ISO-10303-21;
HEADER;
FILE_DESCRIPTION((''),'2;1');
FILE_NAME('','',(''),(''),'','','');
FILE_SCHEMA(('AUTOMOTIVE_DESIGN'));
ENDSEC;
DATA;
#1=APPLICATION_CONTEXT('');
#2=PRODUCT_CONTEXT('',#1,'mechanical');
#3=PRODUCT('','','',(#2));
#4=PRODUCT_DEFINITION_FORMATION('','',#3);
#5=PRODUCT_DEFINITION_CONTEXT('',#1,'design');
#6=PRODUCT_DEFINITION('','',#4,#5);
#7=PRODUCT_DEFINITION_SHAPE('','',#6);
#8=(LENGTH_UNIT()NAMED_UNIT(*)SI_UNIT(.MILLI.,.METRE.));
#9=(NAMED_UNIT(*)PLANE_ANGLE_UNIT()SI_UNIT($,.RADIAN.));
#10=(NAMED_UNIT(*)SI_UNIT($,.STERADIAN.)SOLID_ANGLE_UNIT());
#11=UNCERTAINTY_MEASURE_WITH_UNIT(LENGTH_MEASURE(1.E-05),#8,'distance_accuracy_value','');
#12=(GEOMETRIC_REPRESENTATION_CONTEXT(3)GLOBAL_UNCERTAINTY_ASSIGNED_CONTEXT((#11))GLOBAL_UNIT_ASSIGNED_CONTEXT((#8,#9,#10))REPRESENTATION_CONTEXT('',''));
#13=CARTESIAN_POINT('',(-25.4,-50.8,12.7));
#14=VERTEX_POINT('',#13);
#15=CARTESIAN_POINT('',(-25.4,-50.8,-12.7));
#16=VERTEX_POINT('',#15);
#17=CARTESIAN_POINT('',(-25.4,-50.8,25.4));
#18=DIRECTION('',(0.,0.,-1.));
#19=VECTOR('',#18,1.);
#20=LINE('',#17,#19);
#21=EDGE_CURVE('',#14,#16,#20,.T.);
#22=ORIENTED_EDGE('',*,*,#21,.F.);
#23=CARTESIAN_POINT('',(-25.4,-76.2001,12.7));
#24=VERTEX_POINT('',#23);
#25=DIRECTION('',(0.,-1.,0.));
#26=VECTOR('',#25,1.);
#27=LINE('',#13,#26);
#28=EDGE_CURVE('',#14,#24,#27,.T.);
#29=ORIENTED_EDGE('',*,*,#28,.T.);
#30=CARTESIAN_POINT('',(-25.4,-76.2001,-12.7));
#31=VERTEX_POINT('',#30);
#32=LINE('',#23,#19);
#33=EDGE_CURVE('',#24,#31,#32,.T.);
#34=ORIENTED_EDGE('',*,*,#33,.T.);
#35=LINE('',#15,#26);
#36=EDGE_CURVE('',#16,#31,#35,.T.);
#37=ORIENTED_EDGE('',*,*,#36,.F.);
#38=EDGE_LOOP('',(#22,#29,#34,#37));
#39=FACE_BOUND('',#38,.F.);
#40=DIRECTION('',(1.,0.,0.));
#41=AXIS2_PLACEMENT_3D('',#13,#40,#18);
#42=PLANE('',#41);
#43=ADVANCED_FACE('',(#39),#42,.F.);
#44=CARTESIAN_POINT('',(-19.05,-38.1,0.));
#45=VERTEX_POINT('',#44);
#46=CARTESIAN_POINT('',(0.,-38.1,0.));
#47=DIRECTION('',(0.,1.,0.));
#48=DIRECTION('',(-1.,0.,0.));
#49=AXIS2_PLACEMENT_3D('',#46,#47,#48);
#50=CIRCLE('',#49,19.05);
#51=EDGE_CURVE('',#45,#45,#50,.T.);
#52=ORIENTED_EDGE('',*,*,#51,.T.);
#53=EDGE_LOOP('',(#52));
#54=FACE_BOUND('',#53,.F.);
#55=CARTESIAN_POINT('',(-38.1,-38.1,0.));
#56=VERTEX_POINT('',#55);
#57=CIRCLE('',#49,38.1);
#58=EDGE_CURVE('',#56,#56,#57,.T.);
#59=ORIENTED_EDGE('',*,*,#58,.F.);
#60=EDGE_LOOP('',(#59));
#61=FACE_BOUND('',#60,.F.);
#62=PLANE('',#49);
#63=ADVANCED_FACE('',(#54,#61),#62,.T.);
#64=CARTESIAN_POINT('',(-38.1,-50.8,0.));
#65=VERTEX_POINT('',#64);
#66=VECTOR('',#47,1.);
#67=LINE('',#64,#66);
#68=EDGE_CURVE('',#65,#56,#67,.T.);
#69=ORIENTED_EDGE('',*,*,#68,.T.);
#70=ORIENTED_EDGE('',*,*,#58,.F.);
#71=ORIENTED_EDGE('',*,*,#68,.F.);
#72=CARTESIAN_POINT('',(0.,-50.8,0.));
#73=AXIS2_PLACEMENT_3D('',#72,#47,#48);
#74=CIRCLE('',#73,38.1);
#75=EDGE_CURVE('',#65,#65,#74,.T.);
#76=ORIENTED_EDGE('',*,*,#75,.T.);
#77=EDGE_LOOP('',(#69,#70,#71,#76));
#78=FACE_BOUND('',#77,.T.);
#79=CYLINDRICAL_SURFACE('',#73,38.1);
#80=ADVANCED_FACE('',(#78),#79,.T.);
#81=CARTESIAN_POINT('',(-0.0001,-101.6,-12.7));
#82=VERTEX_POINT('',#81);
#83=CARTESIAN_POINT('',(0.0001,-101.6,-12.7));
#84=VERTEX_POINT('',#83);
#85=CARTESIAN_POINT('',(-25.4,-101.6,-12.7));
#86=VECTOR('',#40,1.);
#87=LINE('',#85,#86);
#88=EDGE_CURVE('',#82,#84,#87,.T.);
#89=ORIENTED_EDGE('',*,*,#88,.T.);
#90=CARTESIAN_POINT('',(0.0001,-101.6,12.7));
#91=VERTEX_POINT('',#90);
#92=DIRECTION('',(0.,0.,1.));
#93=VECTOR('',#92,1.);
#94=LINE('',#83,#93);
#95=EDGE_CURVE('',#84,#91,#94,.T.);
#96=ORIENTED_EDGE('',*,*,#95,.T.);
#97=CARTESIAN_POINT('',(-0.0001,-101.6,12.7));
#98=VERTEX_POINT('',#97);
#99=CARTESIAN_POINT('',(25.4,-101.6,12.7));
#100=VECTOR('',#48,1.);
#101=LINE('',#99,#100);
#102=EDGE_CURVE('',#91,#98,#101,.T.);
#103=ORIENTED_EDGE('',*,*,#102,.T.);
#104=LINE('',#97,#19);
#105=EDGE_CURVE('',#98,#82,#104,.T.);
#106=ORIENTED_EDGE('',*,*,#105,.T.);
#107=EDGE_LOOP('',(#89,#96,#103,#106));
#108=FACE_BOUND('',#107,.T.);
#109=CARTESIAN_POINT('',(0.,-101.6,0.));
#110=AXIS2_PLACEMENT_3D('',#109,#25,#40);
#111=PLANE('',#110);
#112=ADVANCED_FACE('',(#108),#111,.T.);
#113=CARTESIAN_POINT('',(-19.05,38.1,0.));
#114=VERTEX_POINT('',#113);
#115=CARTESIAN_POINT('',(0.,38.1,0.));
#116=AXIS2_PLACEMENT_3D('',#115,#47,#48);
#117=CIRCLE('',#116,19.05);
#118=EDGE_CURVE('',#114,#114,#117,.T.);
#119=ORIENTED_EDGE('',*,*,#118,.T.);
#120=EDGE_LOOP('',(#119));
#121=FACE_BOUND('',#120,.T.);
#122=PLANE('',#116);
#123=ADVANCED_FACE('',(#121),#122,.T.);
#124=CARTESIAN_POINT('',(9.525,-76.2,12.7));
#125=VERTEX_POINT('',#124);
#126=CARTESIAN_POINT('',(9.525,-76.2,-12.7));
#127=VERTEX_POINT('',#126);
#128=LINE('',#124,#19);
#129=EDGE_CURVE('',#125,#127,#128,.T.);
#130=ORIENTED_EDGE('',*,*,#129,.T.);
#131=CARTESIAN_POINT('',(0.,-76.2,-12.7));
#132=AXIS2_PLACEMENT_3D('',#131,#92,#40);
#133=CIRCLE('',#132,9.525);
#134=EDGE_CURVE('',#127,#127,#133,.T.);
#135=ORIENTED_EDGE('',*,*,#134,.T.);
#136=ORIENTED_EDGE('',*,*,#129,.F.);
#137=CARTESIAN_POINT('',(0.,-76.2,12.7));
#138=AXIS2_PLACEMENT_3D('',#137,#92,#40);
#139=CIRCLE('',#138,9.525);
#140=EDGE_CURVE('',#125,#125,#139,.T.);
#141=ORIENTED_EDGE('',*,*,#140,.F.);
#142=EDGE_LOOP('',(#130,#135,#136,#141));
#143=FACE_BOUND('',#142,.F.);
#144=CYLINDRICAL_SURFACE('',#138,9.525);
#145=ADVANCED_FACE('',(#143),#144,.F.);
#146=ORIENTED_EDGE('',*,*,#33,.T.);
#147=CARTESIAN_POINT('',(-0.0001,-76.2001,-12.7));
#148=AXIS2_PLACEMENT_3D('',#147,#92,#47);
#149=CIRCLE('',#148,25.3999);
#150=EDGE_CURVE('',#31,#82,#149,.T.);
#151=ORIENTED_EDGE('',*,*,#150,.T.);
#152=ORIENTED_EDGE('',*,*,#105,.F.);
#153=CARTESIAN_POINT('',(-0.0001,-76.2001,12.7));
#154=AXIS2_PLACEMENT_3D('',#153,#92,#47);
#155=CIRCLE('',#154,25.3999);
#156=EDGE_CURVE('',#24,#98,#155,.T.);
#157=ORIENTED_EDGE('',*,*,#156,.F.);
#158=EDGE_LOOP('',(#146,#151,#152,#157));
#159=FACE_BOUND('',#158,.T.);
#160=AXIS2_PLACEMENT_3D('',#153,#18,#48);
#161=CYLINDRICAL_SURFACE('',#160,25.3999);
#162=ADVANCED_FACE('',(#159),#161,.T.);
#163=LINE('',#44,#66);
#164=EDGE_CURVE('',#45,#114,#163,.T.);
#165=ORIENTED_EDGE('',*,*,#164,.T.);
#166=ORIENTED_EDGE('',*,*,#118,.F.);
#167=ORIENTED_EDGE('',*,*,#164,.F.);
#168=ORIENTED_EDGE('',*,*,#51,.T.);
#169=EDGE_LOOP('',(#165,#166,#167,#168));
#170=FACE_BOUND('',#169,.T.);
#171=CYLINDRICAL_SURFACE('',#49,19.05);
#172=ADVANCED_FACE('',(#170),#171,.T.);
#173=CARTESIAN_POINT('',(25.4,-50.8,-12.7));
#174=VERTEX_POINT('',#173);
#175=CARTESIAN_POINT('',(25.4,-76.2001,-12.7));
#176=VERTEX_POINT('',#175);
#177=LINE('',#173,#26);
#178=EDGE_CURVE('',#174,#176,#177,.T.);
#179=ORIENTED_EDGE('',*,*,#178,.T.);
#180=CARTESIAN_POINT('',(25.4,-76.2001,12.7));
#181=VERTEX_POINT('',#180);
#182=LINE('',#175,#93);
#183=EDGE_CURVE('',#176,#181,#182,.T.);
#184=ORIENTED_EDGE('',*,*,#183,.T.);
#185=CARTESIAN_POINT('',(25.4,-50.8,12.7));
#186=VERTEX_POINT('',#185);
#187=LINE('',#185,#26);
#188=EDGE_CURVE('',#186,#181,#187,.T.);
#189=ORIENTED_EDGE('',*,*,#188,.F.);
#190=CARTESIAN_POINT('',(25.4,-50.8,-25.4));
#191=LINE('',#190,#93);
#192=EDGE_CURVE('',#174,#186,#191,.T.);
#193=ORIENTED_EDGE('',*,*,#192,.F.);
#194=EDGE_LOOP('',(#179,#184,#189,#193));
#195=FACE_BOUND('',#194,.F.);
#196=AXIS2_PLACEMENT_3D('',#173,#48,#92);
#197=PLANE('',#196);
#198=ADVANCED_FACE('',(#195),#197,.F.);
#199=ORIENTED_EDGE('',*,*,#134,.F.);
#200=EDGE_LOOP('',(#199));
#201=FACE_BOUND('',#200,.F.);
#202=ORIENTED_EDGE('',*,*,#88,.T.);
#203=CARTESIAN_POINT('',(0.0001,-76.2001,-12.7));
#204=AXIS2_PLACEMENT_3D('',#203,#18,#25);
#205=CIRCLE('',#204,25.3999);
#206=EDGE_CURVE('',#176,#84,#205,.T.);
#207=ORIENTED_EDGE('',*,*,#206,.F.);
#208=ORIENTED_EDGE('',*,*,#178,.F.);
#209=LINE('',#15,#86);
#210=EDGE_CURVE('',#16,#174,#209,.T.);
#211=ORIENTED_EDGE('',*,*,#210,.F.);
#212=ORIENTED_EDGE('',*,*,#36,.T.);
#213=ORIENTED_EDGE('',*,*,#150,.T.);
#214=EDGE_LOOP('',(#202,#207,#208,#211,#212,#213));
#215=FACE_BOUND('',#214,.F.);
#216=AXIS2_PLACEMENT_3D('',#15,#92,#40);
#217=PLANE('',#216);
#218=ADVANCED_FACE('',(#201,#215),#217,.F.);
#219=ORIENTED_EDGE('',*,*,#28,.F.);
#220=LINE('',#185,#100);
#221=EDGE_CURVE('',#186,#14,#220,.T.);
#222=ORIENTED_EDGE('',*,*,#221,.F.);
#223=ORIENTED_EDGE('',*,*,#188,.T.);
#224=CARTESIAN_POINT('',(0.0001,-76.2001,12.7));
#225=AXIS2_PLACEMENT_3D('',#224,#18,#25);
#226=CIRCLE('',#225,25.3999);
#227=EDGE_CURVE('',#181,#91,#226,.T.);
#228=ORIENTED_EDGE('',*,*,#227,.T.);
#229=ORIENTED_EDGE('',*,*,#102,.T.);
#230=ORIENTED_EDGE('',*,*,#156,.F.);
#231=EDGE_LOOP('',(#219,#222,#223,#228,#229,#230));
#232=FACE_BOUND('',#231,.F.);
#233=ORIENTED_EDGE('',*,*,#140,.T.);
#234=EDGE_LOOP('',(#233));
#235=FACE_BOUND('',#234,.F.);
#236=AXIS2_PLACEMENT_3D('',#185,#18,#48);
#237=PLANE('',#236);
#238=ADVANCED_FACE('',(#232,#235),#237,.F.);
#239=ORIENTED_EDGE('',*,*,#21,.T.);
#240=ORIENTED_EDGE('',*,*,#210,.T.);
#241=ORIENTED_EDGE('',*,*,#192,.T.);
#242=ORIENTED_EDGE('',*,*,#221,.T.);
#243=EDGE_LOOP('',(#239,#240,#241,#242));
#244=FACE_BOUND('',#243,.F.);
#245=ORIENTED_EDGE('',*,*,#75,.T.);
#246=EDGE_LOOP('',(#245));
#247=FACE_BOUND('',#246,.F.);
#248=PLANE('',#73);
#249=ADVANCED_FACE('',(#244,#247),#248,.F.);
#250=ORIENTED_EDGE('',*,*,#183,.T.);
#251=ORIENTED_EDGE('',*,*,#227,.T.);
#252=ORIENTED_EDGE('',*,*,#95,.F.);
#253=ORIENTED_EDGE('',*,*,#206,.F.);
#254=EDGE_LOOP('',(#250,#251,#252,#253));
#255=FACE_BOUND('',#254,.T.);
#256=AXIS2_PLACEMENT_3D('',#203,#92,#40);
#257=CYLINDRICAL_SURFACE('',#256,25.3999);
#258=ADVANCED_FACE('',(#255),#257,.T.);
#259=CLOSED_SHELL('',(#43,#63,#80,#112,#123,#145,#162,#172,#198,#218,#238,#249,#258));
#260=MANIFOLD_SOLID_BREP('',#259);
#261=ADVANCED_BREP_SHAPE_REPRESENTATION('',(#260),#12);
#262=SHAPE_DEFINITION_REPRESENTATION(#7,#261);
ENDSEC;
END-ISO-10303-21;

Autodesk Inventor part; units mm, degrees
ref_plane "YZ Plane" through (0, 0, 0) normal (1, 0, 0) x (0, 1, 0)
ref_plane "XZ Plane" through (0, 0, 0) normal (0, 1, 0) x (-1, 0, 0)
ref_plane "XY Plane" through (0, 0, 0) normal (0, 0, 1) x (1, 0, 0)
sketch "Sketch1" plane through (0, 0, 0) normal (0, 0, 1) x (1, 0, 0)
  line L0 (-19.05, 38.1) -> (0, 38.1)
  line L1 (-19.05, -38.1) -> (-19.05, 38.1)
  line L2 (-38.1, -50.8) -> (-38.1, -38.1)
  line L3 (-19.05, -38.1) -> (-38.1, -38.1)
  line L4 (-38.1, -50.8) -> (0, -50.8)
  line L5 (0, 38.1) -> (0, -50.8)
  line L6 (0, -68.58) -> (0, 55.88) projected
  point P0 (0, 0)
revolve "Revolution1" add sketch "Sketch1" angle 360 about axis through (0, -10, 0) along (0, 1, 0)
sketch "Sketch2" plane through (0, -50.8, 0) normal (0, -1, 0) x (1, 0, 0)
  line L0 (25.4, 25.4) -> (-25.4, 25.4)
  line L1 (-25.4, 25.4) -> (-25.4, -25.4)
  line L2 (-25.4, -25.4) -> (25.4, -25.4)
  line L3 (25.4, -25.4) -> (25.4, 25.4)
  line L4 (25.4, 25.4) -> (-25.4, -25.4) construction
  line L5 (-25.4, 25.4) -> (25.4, -25.4) construction
  line L6 (25.4, 12.7) -> (-25.4, 12.7)
  line L7 (-25.4, 12.7) -> (-25.4, -12.7)
  line L8 (-25.4, -12.7) -> (25.4, -12.7)
  line L9 (25.4, -12.7) -> (25.4, 12.7)
  point P0 (0, 0)
  dimension "d5" = 50.8
  dimension "d6" = 50.8
extrude "Extrusion3" add sketch "Sketch2" along normal blind 50.8 contours L3 L8 L1 L6
fillet "Fillet2" radius 25.4 2 edges at (25.4, -101.6, 0) (-25.4, -101.6, 0)
sketch "Sketch4" plane through (-25.4, -50.8, 12.7) normal (0, 0, 1) x (1, 0, 0)
  arc A0 (0, -25.4) -> (50.8, -25.4) centre (25.4, -25.4) ccw projected
  line L0 (50.8, 0) -> (50.8, -25.4) projected
  line L1 (0, 0) -> (50.8, 0) projected
  line L2 (0, 0) -> (0, -25.4) projected
  circle A1 centre (25.4, -25.4) radius 9.525
  point P0 (25.4, 50.8)
  dimension "d16" = 19.05
extrude "Extrusion4" cut sketch "Sketch4" against normal blind 50.8 contours A1
properties part number "shock absorber bottom"
